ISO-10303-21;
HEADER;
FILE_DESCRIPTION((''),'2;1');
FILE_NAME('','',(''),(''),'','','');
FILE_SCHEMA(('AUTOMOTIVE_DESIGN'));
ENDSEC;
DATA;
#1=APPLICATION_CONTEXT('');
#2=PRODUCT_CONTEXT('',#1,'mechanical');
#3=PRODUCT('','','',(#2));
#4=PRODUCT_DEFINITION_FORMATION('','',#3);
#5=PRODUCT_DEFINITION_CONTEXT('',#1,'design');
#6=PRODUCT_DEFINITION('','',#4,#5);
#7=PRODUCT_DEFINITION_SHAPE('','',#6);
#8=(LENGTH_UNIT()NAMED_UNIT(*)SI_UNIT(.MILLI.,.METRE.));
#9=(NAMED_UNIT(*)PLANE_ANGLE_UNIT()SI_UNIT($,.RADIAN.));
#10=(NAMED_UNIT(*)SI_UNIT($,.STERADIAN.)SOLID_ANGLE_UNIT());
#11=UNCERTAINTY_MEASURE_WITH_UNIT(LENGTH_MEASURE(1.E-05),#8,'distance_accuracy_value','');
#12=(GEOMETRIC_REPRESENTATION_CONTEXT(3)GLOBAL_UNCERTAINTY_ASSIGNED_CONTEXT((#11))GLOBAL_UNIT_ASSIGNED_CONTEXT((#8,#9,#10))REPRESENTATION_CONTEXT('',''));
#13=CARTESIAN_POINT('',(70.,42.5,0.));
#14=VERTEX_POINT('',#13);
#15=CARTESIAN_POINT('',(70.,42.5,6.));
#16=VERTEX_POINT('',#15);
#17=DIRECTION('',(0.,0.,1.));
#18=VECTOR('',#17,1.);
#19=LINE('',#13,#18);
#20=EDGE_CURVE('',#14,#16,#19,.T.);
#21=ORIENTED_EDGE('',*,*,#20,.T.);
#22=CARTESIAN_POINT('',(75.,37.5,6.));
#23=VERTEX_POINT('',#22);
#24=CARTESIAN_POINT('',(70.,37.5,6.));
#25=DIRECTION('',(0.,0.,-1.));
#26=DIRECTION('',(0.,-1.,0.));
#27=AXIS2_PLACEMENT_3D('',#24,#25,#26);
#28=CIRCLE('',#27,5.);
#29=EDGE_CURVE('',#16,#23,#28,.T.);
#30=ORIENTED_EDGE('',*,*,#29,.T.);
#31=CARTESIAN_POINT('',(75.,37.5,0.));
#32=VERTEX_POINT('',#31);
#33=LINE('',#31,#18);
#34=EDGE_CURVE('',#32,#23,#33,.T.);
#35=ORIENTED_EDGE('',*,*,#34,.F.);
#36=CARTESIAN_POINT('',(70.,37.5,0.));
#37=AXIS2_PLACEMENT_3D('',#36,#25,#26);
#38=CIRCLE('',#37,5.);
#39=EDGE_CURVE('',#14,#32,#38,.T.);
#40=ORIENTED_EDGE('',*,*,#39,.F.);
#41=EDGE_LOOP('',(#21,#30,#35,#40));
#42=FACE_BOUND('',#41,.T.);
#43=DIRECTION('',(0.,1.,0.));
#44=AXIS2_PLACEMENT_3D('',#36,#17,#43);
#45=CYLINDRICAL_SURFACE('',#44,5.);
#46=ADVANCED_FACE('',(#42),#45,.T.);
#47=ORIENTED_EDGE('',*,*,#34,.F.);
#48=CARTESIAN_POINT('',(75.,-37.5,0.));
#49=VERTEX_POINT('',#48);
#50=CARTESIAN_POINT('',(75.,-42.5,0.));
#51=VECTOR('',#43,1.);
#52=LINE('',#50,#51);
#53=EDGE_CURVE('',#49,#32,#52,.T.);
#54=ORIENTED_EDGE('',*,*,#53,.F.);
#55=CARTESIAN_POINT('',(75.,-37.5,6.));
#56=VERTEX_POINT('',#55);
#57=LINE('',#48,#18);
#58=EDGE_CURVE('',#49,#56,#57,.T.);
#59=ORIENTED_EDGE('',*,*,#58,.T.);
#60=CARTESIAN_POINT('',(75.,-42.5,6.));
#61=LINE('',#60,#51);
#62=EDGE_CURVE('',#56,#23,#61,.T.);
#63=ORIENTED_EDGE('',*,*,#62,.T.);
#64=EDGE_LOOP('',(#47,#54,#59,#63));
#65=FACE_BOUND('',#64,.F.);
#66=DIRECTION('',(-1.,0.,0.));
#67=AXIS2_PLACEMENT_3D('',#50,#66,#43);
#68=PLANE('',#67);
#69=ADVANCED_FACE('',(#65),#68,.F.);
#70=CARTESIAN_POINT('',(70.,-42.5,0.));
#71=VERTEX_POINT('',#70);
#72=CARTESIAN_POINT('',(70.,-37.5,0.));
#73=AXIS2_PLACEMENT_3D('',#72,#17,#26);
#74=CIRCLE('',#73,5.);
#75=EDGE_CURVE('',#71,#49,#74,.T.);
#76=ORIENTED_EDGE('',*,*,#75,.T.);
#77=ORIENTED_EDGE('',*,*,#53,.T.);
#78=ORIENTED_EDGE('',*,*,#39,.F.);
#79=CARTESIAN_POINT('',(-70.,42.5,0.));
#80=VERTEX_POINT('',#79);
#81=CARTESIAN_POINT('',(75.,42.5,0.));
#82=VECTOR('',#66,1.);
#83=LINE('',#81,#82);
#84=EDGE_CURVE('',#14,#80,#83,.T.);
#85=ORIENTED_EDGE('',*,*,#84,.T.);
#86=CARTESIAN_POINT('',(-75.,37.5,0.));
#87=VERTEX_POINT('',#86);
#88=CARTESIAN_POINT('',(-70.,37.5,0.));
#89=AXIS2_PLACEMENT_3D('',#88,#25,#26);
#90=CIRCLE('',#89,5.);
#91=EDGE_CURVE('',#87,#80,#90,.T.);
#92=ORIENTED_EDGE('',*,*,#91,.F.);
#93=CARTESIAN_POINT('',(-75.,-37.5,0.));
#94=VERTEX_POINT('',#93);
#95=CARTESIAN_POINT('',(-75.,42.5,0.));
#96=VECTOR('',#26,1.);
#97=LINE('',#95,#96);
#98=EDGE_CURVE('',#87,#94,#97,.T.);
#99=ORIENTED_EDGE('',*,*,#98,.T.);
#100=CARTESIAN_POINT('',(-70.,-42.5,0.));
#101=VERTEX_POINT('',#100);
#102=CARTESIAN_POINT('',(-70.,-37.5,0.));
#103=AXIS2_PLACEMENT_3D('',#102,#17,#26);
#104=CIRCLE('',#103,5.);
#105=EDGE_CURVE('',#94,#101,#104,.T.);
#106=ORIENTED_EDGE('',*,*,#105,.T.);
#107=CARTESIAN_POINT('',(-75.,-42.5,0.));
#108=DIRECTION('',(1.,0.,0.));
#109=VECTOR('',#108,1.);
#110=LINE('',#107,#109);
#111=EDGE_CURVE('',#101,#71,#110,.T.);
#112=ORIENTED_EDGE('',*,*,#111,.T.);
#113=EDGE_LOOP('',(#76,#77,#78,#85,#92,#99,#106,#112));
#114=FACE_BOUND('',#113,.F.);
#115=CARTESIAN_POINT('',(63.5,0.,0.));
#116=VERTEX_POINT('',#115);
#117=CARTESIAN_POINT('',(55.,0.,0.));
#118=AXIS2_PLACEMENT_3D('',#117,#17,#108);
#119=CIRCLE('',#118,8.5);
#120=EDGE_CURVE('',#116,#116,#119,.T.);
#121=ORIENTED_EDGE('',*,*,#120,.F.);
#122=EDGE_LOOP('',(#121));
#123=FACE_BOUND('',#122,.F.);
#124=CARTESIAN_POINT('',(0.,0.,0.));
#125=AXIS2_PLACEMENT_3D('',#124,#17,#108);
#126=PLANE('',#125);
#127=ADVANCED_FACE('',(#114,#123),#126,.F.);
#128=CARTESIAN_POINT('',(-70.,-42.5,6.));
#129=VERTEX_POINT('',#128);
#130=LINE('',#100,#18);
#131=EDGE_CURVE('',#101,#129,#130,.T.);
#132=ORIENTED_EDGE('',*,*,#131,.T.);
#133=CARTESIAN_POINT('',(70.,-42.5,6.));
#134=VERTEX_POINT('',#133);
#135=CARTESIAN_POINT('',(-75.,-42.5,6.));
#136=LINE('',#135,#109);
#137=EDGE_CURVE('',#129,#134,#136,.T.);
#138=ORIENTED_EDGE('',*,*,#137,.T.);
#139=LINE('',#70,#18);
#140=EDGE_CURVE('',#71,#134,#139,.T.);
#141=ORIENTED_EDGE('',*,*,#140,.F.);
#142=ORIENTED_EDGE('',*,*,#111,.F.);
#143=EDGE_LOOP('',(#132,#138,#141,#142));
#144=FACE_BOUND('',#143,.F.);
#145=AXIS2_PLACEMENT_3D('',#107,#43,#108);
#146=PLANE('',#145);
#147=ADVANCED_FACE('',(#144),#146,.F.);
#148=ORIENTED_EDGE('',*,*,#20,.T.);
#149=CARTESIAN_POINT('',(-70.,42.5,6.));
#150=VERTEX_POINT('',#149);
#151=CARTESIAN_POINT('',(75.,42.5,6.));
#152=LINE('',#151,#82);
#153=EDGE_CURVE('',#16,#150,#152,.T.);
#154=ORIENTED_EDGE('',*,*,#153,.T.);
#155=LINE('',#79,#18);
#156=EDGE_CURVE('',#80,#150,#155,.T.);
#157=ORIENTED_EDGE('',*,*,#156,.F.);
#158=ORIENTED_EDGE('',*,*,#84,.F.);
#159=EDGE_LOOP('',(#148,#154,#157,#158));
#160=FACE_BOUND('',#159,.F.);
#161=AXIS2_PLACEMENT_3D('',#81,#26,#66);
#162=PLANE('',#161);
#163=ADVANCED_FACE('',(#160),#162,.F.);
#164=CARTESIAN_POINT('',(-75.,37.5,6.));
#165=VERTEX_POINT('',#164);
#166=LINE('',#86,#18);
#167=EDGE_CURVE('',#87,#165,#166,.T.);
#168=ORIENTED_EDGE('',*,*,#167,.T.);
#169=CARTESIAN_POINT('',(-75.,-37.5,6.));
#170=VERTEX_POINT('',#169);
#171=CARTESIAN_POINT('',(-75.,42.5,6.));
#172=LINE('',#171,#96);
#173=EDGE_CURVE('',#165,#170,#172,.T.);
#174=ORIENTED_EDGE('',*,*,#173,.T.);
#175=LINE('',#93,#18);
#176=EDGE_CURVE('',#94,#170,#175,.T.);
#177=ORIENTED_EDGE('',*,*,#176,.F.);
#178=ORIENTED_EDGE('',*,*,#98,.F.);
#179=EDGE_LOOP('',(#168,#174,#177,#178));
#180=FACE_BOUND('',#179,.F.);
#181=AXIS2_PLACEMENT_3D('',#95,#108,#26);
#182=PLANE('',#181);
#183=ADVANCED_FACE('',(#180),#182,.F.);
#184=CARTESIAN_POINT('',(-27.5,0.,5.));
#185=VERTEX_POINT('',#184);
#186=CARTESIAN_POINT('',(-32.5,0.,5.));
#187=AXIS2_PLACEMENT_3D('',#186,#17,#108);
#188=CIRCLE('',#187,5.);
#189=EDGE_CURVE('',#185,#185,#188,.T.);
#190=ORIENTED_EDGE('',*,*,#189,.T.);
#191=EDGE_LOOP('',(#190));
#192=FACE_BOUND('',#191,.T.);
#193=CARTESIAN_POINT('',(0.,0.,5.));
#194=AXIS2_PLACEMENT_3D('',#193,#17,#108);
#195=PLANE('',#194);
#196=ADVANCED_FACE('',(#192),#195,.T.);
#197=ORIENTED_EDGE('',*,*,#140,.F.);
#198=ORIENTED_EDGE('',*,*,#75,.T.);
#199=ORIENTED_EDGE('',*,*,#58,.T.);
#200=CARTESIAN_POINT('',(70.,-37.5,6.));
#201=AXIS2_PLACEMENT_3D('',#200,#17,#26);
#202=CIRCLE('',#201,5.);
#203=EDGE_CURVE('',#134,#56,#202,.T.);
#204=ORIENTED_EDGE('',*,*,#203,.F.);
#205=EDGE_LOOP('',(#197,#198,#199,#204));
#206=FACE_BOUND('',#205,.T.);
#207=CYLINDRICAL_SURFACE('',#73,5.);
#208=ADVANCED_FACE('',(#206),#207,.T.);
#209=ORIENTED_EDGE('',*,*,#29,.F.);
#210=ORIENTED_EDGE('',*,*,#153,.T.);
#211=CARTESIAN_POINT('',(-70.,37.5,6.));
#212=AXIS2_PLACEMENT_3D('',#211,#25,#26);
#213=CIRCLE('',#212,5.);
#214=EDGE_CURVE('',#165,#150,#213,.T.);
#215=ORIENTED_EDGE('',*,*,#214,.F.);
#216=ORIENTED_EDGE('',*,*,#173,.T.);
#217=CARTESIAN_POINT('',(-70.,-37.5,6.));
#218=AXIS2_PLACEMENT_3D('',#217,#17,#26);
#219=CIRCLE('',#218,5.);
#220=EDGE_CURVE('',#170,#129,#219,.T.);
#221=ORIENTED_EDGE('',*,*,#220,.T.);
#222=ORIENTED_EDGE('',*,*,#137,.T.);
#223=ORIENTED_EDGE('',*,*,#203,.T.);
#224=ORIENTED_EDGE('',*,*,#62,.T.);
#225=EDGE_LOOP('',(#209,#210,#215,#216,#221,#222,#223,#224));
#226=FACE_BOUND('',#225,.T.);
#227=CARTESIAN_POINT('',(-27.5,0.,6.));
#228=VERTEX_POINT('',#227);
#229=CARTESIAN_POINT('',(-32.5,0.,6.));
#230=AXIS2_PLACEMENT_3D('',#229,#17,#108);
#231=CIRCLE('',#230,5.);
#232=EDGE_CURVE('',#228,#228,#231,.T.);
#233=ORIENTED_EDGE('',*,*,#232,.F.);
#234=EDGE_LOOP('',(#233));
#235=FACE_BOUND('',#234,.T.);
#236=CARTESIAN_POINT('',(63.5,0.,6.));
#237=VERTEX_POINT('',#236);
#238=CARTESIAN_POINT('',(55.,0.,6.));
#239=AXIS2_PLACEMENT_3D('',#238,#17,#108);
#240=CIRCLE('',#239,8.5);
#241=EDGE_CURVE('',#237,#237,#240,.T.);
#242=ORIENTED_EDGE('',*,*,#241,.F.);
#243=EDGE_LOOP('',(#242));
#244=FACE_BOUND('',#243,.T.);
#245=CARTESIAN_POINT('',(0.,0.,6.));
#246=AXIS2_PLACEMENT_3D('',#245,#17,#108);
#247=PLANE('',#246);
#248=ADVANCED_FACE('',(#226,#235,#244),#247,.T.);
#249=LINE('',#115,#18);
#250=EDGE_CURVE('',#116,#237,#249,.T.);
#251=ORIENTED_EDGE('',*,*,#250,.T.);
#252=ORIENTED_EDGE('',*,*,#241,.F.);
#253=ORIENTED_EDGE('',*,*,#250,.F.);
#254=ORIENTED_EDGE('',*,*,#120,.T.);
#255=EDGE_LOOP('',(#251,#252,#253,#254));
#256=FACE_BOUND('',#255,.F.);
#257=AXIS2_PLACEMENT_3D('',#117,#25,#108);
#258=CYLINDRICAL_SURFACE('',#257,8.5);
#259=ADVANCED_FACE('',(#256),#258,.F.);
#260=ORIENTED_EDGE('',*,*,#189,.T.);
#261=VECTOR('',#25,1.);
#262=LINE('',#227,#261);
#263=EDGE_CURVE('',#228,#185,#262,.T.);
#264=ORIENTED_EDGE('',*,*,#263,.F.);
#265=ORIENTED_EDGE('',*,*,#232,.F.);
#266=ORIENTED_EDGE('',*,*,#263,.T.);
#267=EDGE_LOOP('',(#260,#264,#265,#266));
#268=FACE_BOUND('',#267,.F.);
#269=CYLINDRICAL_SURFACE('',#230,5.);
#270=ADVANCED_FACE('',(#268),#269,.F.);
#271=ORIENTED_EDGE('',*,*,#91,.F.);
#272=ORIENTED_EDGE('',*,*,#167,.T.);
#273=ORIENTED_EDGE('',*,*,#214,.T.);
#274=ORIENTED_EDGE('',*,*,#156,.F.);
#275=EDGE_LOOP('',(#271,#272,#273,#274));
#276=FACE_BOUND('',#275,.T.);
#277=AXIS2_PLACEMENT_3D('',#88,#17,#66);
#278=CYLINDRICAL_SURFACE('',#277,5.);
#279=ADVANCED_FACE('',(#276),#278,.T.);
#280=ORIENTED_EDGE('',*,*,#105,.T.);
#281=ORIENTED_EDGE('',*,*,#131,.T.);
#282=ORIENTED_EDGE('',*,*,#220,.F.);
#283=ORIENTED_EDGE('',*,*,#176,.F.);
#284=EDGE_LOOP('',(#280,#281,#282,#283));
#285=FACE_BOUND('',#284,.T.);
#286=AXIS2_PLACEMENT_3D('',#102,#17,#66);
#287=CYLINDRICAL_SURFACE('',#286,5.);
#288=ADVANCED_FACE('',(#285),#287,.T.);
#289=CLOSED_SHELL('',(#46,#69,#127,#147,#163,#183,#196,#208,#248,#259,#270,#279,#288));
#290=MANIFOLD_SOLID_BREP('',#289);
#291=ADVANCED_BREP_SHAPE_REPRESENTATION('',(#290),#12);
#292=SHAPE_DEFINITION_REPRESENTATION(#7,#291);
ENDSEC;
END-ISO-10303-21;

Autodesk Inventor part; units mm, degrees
ref_plane "YZ Plane" through (0, 0, 0) normal (1, 0, 0) x (0, 1, 0)
ref_plane "XZ Plane" through (0, 0, 0) normal (0, 1, 0) x (-1, 0, 0)
ref_plane "XY Plane" through (0, 0, 0) normal (0, 0, 1) x (1, 0, 0)
sketch "Sketch1" plane through (0, 0, 0) normal (0, 0, 1) x (1, 0, 0)
  line L0 (-75, -42.5) -> (75, -42.5)
  line L1 (75, -42.5) -> (75, 42.5)
  line L2 (75, 42.5) -> (-75, 42.5)
  line L3 (-75, 42.5) -> (-75, -42.5)
  line L4 (-75, -42.5) -> (75, 42.5) construction
  line L5 (75, -42.5) -> (-75, 42.5) construction
  circle A0 centre (55, -22.5) radius 8.5
  circle A1 centre (55, 22.5) radius 8.5
  line L6 (0, 0) -> (75, 0) construction
  circle A2 centre (55, 0) radius 8.5
  dimension "d0" = 150
  dimension "d1" = 85
  dimension "d23" = 17
  dimension "d25" = 20
  dimension "d26" = 20
extrude "Plate1" add sketch "Sketch1" along normal blind 6 contours L3 L2 L1 L0 | A0 | A1
sketch "Sketch5" plane through (0, 0, 6) normal (0, 0, 1) x (1, 0, 0)
  line L0 (75, -42.5) -> (-75, -42.5) projected
  line L1 (-75, -42.5) -> (-75, 42.5) projected
  line L2 (-75, 42.5) -> (75, 42.5) projected
  circle A0 centre (-32.5, 0) radius 42.5
  circle A1 centre (-32.5, 0) radius 5
  point P0 (0, 0)
  point P1 (50, -55)
  point P2 (-50, -55)
  point P3 (-70, -35)
  point P4 (-70, 35)
  point P5 (-50, 55)
  point P6 (50, 55)
  dimension "d27" = 10
extrude "Extrusion2" cut sketch "Sketch5" against normal blind 1 contours A1
fillet "Corner Round2" radius 5 4 edges at (-75, 42.5, 3) (-75, -42.5, 3) (75, -42.5, 3) (75, 42.5, 3)
equation "\"d26\" = d25"
equation "\"d2\" = Thickness"
equation "\"BendReliefWidth\" = Thickness"
equation "\"BendReliefDepth\" = 0.5 * Thickness"
equation "\"CornerReliefSize\" = 4 * Thickness"
equation "\"MinimumRemnant\" = 2 * Thickness"
equation "\"TransitionRadius\" = BendRadius"
equation "\"JacobiRadiusSize\" = BendRadius"
equation "\"GapSize\" = Thickness"
equation "\"Thickness\" = 6"
equation "\"BendRadius\" = 5"
properties part number "PNS 1695 leg floor plate" material "Stainless Steel"
